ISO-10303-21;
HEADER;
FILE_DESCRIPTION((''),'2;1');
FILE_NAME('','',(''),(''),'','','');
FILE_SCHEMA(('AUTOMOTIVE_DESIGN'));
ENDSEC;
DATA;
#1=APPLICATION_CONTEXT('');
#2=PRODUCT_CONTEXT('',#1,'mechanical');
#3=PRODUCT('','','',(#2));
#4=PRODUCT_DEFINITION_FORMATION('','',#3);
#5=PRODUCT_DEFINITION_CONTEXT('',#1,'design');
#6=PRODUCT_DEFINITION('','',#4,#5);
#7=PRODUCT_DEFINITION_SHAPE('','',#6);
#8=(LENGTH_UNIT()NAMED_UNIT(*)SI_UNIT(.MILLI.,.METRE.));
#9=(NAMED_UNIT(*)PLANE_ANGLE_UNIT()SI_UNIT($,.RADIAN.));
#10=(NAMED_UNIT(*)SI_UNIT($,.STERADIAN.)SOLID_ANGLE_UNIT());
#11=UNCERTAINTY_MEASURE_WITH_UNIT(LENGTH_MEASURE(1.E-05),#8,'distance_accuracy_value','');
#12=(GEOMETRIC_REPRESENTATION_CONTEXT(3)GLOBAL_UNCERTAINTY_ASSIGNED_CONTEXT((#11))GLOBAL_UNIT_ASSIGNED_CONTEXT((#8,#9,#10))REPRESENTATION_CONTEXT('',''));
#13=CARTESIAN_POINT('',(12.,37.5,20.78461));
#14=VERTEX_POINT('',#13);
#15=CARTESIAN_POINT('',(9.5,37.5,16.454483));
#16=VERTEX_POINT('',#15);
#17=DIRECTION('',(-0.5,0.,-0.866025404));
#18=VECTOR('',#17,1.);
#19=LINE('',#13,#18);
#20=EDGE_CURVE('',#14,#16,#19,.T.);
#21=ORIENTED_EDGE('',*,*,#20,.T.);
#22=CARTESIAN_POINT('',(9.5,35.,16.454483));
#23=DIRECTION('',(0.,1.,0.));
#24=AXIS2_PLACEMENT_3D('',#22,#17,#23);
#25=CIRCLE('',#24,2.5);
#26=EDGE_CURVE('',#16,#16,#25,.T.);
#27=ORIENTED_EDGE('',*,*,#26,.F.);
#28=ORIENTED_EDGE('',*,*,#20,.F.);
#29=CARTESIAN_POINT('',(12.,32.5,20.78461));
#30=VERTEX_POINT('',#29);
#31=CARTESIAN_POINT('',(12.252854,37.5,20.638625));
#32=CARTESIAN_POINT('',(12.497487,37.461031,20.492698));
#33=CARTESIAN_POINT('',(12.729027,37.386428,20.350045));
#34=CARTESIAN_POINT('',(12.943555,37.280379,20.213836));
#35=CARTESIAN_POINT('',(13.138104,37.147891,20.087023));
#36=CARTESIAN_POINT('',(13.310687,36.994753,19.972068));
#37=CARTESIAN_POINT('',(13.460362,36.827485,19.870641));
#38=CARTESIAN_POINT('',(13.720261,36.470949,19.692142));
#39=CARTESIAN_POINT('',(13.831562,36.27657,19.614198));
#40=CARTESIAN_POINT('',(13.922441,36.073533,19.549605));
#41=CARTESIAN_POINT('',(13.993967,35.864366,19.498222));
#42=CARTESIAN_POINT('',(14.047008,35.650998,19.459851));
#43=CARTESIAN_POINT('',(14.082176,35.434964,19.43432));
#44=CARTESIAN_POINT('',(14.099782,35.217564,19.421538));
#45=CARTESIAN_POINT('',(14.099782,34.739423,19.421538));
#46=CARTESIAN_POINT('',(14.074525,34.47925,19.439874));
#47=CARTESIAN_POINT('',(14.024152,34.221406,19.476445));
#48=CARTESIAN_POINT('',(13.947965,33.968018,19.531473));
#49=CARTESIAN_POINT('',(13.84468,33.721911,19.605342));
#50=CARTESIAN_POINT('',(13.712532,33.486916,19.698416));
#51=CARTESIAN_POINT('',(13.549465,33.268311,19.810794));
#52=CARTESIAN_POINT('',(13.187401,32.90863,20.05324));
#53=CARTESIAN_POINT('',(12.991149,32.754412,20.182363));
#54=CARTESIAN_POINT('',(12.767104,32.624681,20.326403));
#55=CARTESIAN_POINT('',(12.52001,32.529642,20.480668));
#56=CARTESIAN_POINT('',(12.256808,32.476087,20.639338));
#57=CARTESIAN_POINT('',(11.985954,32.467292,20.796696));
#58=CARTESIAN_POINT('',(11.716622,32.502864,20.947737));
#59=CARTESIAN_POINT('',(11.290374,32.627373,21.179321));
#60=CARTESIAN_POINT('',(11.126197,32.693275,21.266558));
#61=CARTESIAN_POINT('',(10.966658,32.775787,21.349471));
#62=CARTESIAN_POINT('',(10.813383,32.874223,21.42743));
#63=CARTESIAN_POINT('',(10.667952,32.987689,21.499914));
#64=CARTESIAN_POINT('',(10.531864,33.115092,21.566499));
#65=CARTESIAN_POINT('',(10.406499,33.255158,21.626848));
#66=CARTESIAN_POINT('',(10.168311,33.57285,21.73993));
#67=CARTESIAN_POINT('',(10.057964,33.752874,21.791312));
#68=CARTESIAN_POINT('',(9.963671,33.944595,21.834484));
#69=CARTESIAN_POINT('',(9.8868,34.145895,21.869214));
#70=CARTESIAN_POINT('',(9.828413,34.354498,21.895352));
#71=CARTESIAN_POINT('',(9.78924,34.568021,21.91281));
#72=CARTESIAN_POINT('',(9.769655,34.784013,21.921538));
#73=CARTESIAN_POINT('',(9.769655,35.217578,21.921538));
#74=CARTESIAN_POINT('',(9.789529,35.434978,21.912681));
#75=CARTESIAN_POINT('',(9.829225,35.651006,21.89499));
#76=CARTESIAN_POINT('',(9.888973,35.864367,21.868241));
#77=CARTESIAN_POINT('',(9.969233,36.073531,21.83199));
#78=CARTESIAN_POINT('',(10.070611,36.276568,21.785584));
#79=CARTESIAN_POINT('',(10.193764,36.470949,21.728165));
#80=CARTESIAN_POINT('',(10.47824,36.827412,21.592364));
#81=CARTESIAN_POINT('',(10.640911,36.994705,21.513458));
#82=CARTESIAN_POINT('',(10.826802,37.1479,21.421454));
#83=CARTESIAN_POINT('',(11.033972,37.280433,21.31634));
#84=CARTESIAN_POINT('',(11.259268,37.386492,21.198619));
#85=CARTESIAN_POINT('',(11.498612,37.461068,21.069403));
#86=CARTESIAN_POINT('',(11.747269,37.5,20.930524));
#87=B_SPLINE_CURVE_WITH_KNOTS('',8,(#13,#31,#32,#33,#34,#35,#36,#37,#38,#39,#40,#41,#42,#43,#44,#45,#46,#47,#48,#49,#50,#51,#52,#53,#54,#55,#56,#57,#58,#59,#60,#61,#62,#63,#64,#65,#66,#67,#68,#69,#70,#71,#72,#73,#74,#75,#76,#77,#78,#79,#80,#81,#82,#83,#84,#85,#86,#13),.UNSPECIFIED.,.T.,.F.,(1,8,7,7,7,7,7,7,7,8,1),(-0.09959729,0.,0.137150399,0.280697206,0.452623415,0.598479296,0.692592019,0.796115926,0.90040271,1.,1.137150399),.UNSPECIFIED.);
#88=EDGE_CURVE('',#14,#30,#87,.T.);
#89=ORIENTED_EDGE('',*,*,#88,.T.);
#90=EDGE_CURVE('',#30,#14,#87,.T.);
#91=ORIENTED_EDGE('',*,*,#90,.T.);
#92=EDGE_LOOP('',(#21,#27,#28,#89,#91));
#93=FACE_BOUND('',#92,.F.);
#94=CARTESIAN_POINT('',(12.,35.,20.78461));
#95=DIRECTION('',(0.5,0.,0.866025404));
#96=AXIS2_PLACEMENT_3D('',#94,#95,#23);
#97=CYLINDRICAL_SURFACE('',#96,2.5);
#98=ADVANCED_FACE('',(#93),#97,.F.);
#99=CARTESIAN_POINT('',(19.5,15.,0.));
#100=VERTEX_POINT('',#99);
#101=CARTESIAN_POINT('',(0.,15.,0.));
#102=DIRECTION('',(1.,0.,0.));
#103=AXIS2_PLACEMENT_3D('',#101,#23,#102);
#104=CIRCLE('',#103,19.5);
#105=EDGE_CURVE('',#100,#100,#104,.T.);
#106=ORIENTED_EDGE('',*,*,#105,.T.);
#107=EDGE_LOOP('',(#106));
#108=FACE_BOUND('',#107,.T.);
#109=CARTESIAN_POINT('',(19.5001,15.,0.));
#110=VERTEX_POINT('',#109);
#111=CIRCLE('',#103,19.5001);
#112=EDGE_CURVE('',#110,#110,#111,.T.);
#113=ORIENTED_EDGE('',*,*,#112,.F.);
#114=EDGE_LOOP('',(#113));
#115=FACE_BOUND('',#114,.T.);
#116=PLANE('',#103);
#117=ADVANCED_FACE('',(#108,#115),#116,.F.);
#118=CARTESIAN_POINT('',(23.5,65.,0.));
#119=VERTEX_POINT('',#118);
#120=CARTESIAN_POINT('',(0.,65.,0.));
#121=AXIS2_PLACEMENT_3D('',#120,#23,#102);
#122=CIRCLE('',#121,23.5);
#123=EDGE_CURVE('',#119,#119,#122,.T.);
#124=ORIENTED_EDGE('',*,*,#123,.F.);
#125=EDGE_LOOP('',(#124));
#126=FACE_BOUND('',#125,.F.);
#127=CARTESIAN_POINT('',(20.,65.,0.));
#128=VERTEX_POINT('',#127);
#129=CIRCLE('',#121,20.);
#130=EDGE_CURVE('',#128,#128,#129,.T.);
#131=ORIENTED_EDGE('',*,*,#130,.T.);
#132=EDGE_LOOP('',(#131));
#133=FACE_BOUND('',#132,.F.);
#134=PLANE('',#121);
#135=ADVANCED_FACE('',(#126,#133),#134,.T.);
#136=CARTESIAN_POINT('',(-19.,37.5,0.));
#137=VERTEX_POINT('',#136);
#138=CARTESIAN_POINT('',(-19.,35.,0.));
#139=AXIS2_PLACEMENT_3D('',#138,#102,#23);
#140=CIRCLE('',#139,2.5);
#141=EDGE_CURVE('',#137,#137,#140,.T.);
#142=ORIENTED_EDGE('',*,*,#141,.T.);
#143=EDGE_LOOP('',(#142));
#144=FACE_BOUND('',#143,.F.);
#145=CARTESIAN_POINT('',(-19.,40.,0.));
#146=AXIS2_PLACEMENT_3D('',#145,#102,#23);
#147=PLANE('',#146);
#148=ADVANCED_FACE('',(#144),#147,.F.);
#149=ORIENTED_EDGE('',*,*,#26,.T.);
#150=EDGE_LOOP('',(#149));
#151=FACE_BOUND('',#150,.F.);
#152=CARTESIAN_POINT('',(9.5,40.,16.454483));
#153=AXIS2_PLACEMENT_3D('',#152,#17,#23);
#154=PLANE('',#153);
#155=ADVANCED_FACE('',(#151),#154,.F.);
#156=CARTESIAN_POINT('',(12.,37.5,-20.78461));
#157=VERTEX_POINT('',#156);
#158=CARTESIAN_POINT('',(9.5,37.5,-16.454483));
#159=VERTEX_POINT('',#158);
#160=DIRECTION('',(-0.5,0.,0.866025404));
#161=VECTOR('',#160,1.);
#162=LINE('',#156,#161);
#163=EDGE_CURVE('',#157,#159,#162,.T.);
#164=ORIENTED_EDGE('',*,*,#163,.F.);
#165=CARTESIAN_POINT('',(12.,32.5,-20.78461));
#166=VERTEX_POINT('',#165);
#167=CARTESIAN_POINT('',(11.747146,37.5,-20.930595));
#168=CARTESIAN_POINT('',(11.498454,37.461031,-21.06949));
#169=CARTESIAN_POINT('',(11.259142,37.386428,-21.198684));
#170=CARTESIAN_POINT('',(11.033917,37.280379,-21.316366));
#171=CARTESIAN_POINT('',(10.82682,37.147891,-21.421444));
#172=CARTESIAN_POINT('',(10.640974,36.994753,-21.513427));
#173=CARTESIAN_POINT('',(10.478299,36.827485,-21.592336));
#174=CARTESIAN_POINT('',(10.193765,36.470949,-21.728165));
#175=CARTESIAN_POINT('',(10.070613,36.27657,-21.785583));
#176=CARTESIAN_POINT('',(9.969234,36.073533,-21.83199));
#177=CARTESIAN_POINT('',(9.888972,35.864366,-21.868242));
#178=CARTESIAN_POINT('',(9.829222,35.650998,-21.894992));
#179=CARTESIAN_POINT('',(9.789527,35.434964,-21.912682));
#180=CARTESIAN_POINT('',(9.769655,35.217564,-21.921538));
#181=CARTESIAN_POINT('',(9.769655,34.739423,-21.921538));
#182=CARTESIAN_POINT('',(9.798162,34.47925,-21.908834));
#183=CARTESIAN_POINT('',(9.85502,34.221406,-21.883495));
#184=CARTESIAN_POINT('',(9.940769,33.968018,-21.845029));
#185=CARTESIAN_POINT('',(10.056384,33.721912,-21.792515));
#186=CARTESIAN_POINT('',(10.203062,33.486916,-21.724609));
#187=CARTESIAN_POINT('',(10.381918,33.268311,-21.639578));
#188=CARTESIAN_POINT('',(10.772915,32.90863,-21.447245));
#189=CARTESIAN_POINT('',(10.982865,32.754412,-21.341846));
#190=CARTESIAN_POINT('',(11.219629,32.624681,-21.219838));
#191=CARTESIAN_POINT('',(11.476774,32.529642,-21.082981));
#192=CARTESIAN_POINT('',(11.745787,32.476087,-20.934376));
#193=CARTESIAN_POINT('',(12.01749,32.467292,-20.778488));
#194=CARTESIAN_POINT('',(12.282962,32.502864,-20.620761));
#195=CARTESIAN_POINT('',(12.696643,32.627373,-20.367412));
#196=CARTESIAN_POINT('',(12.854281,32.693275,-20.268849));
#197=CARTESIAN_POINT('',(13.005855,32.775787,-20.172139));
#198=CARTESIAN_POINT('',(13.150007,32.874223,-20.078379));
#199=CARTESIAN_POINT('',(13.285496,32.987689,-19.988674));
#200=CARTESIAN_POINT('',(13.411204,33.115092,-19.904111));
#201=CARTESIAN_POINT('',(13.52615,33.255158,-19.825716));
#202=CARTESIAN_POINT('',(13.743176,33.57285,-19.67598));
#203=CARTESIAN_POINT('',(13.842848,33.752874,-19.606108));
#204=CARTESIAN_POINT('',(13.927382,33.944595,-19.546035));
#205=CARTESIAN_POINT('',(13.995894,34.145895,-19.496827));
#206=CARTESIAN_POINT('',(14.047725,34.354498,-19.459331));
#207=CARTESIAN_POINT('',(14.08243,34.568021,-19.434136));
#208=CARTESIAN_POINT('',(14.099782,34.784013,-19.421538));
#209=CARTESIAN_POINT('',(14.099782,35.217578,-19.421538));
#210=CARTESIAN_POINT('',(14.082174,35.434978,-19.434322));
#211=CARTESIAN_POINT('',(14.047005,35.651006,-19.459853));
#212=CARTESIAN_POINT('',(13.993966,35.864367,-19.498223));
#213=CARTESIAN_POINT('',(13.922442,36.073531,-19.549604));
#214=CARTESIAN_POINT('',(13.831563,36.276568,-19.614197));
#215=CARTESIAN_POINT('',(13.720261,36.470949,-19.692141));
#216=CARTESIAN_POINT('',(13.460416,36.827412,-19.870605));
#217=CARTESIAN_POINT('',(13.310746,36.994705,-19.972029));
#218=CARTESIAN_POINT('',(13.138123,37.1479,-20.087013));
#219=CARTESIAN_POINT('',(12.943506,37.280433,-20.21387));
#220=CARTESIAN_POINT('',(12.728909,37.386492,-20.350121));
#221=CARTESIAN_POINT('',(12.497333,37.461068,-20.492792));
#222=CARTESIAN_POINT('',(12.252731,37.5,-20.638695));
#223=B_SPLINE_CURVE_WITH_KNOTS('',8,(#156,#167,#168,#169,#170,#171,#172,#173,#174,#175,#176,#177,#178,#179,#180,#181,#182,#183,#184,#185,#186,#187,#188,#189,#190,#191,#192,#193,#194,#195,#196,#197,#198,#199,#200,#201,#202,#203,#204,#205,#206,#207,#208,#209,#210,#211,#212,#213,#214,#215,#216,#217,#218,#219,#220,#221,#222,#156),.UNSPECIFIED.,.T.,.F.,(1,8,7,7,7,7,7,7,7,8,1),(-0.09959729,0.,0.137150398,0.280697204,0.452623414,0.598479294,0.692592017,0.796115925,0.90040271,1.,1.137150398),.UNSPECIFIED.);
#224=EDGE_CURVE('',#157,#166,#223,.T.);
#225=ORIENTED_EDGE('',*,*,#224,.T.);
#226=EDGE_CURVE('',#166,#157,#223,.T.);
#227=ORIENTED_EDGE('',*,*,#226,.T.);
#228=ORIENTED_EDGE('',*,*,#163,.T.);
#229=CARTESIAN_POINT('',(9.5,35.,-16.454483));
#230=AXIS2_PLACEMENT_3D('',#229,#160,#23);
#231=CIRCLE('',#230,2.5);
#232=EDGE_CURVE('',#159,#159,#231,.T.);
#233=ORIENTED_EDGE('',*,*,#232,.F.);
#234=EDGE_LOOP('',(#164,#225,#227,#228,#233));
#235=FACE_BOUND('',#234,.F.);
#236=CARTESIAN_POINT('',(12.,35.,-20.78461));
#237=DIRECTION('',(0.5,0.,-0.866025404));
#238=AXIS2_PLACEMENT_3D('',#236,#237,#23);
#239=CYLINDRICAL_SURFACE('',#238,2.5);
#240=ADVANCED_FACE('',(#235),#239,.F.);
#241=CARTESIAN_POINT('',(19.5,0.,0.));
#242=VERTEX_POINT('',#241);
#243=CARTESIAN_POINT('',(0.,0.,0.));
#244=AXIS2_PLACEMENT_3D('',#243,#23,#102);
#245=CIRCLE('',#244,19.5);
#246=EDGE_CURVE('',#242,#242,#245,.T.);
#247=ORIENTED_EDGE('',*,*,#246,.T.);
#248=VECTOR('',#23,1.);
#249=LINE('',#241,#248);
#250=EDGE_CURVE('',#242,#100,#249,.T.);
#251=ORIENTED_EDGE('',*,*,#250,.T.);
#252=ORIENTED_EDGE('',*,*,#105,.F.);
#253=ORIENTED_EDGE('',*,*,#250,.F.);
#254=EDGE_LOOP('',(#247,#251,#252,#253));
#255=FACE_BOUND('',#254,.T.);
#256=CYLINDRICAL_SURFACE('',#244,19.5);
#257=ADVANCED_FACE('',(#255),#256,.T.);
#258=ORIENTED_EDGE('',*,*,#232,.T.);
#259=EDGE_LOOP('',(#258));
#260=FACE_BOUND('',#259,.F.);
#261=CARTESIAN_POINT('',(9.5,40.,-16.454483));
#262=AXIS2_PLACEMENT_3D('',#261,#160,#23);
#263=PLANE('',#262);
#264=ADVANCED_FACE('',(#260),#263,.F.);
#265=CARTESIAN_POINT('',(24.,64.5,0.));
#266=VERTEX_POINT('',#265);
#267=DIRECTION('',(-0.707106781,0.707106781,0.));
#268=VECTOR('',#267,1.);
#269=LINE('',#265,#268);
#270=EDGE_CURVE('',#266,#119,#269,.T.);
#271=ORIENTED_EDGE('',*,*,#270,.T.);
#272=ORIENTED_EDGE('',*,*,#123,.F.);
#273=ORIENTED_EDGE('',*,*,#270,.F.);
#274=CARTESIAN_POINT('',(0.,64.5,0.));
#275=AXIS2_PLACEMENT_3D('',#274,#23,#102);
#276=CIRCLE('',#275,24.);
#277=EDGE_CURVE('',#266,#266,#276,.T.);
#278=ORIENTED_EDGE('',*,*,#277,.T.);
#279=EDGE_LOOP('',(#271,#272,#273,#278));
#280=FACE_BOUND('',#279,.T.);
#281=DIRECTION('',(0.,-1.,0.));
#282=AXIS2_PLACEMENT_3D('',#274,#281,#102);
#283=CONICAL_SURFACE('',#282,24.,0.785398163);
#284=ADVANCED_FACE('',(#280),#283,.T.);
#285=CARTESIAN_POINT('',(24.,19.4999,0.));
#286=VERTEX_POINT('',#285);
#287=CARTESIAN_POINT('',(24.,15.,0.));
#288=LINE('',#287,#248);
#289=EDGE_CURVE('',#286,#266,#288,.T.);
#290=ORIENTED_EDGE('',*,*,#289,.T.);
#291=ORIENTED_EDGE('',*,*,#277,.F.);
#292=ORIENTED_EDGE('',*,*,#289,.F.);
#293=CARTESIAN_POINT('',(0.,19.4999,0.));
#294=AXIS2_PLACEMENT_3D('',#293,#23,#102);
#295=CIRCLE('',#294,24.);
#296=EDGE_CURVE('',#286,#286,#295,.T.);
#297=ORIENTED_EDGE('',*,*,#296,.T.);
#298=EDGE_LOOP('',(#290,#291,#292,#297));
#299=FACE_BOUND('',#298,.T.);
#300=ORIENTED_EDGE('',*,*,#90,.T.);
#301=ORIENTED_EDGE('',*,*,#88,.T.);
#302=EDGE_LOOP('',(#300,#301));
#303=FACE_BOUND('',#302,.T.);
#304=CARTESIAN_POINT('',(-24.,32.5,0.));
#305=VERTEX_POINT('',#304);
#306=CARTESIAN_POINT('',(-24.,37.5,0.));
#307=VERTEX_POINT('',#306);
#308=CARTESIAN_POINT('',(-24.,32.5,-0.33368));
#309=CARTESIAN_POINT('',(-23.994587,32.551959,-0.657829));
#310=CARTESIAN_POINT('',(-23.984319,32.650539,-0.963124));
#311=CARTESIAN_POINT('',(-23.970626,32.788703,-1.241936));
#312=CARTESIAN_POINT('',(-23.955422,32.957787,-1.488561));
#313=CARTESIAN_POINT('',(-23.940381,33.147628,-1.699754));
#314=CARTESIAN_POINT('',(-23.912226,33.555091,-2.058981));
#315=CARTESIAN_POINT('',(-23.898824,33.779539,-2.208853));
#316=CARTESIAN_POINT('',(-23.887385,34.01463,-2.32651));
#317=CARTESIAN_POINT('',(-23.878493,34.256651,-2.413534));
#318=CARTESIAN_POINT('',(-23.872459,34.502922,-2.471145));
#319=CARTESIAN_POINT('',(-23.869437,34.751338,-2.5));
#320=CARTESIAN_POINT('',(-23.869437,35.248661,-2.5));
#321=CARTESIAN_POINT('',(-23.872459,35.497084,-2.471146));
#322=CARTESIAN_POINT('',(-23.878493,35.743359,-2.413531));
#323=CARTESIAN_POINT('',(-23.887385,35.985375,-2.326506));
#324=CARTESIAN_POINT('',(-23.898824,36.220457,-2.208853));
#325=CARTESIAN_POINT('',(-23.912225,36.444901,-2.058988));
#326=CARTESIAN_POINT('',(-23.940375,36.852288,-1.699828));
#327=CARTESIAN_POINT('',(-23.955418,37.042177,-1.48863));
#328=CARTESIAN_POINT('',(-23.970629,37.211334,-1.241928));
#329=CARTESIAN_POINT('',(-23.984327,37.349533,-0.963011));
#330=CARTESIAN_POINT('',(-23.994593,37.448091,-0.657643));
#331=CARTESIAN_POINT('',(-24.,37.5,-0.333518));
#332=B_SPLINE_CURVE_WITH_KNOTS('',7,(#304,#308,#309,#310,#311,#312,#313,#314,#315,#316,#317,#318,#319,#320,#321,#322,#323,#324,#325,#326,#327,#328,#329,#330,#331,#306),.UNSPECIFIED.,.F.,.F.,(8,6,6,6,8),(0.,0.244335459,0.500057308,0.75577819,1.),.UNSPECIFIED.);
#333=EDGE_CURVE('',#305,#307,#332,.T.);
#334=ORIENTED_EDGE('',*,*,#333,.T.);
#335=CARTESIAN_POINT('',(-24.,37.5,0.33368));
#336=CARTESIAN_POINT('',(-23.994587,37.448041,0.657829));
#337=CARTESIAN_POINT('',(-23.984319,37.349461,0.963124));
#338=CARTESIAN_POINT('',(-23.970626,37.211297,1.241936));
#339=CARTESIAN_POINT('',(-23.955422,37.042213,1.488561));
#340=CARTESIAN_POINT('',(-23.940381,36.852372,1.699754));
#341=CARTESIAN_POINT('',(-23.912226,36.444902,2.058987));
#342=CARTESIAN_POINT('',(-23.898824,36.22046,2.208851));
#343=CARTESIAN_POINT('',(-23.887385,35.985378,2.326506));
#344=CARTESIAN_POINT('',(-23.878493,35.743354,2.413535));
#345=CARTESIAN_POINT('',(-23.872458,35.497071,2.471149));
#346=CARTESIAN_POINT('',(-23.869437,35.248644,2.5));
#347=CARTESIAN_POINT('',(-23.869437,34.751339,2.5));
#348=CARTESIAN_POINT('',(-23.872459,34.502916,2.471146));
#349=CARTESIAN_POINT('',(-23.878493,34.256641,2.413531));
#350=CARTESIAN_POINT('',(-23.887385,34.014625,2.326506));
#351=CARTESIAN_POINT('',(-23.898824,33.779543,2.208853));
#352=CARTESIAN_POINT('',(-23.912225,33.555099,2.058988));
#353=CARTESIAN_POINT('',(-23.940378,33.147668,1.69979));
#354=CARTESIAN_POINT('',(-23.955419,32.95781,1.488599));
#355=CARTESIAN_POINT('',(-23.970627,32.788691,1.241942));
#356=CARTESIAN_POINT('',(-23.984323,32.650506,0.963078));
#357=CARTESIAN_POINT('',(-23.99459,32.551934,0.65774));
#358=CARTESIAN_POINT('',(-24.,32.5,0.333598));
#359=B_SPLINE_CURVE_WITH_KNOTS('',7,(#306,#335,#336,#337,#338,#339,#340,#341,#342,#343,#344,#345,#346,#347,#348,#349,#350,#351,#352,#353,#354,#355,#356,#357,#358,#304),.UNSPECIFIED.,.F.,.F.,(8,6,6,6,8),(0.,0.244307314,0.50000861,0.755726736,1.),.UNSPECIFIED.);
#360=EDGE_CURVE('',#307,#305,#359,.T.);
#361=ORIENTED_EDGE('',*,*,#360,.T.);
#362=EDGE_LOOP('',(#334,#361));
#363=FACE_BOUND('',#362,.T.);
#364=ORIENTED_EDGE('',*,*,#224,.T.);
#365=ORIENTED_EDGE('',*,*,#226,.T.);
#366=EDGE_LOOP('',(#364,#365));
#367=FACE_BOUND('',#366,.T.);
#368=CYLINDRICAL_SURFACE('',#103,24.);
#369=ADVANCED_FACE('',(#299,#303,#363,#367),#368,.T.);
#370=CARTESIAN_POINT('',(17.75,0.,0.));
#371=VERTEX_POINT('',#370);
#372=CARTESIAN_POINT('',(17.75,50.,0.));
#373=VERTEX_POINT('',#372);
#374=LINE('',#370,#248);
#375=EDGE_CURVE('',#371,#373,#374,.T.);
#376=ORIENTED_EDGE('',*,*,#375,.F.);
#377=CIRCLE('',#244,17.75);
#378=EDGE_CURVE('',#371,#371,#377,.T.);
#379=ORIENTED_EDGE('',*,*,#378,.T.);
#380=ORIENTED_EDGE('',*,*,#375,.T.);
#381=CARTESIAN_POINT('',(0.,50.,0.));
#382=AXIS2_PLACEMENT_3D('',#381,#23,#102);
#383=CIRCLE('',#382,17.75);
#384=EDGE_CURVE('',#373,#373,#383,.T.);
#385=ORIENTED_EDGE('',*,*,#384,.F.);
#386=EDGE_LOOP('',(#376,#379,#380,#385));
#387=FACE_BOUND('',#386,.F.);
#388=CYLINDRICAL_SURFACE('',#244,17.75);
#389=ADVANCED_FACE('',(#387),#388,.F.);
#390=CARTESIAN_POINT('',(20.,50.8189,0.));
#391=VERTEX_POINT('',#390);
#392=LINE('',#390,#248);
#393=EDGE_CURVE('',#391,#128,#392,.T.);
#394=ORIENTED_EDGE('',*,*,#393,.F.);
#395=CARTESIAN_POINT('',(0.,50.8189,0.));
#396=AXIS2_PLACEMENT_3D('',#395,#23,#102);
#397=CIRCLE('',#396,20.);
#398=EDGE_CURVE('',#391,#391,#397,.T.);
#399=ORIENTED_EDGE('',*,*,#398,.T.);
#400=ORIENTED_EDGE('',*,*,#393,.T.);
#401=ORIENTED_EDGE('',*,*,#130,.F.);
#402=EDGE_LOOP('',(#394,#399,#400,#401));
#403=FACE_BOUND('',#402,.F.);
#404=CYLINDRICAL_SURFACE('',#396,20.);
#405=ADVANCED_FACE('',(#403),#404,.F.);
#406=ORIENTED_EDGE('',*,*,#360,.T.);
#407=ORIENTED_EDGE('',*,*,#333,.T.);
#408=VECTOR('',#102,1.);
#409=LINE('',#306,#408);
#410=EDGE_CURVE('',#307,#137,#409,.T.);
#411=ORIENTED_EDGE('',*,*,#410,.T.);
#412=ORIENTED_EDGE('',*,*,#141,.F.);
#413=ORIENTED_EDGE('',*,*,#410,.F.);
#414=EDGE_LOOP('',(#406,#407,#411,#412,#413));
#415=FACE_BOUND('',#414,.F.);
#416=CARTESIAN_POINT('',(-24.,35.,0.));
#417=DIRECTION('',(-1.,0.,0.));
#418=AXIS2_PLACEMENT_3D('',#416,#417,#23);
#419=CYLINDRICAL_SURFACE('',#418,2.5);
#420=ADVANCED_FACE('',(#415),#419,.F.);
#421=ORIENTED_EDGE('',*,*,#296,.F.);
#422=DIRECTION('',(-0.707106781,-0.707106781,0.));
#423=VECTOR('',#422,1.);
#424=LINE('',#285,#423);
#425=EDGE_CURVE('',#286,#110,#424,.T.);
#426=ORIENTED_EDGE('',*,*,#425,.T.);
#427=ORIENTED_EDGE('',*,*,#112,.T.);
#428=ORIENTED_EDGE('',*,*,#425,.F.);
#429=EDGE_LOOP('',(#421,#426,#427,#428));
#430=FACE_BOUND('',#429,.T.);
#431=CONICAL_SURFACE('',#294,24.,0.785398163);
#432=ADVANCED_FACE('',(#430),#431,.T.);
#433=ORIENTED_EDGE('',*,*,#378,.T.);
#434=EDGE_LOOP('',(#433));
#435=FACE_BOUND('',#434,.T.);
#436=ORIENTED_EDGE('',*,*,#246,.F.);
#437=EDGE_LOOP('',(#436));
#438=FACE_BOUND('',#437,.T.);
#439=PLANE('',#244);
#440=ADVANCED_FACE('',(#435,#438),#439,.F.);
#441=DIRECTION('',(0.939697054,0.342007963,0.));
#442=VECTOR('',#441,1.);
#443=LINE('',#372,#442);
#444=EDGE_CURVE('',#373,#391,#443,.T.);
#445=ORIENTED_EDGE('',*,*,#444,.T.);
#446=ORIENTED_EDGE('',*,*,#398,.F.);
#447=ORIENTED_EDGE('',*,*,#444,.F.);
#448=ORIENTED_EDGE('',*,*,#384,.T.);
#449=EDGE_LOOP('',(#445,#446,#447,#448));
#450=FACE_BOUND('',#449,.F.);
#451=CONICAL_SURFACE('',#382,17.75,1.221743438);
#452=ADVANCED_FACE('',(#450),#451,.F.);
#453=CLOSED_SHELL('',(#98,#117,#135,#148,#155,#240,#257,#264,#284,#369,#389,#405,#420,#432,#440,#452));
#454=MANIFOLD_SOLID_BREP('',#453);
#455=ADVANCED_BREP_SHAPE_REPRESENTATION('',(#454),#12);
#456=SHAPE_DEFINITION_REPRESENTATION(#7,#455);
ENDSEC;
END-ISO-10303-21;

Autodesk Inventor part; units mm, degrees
ref_plane "XZ Plane" through (0, 0, 0) normal (0, 1, 0) x (-1, 0, 0)
ref_plane "XY Plane" through (0, 0, 0) normal (0, 0, 1) x (1, 0, 0)
sketch "Sketch3" plane through (0, 0, 0) normal (0, 0, 1) x (1, 0, 0)
  line L0 (0, 0) -> (0, 23.925) construction
  line L1 (17.75, 0) -> (17.75, 50)
  line L2 (17.75, 0) -> (19.5, 0)
  line L3 (19.5, 0) -> (19.5, 15)
  line L4 (19.5, 15) -> (24, 15)
  line L5 (24, 15) -> (24, 65)
  line L6 (17.75, 50) -> (20, 50.8189)
  line L7 (20, 50.8189) -> (20, 65)
  line L8 (20, 65) -> (24, 65)
  dimension "d9" = 35.5
  dimension "d10" = 39
  dimension "d11" = 40
  dimension "d13" = 70
  dimension "d14" = 48
  dimension "d15" = 15
  dimension "d16" = 50
  dimension "d27" = 65
revolve "Revolution2" add sketch "Sketch3" angle 360 about axis through (0, 0, 0) along (0, 1, 0)
chamfer "Chamfer1" distance 4.5 angle 45 1 edges at (-24, 15, 0)
thread "Thread1" size "M48x2" class "6g" standard "ANSI Metric M Profile" length 15
chamfer "Chamfer2" distance 0.5 angle 45 1 edges at (-24, 65, 0)
ref_plane "Work Plane1" through (-24, 40, 0) normal (1, 0, 0) x (0, 1, 0)
sketch "Sketch4" plane through (-24, 40, 0) normal (1, 0, 0) x (0, 1, 0)
  circle A0 centre (-5, 0) radius 2.5
  line L0 (25, 23.5) -> (25, -23.5) projected
  point P0 (-40, 0)
  dimension "d28" = 5
  dimension "d29" = 30
extrude "Extrusion1" cut sketch "Sketch4" along normal blind 5
thread "Thread2" size "M5x0.8" class "6H" standard "ANSI Metric M Profile" full length
pattern_circular "Circular Pattern1" count 3 over 360 about axis through (0, 40, 0) along (0, 1, 0) of "Extrusion1"
properties part number "OringNut" material "Stainless Steel, 440C"
